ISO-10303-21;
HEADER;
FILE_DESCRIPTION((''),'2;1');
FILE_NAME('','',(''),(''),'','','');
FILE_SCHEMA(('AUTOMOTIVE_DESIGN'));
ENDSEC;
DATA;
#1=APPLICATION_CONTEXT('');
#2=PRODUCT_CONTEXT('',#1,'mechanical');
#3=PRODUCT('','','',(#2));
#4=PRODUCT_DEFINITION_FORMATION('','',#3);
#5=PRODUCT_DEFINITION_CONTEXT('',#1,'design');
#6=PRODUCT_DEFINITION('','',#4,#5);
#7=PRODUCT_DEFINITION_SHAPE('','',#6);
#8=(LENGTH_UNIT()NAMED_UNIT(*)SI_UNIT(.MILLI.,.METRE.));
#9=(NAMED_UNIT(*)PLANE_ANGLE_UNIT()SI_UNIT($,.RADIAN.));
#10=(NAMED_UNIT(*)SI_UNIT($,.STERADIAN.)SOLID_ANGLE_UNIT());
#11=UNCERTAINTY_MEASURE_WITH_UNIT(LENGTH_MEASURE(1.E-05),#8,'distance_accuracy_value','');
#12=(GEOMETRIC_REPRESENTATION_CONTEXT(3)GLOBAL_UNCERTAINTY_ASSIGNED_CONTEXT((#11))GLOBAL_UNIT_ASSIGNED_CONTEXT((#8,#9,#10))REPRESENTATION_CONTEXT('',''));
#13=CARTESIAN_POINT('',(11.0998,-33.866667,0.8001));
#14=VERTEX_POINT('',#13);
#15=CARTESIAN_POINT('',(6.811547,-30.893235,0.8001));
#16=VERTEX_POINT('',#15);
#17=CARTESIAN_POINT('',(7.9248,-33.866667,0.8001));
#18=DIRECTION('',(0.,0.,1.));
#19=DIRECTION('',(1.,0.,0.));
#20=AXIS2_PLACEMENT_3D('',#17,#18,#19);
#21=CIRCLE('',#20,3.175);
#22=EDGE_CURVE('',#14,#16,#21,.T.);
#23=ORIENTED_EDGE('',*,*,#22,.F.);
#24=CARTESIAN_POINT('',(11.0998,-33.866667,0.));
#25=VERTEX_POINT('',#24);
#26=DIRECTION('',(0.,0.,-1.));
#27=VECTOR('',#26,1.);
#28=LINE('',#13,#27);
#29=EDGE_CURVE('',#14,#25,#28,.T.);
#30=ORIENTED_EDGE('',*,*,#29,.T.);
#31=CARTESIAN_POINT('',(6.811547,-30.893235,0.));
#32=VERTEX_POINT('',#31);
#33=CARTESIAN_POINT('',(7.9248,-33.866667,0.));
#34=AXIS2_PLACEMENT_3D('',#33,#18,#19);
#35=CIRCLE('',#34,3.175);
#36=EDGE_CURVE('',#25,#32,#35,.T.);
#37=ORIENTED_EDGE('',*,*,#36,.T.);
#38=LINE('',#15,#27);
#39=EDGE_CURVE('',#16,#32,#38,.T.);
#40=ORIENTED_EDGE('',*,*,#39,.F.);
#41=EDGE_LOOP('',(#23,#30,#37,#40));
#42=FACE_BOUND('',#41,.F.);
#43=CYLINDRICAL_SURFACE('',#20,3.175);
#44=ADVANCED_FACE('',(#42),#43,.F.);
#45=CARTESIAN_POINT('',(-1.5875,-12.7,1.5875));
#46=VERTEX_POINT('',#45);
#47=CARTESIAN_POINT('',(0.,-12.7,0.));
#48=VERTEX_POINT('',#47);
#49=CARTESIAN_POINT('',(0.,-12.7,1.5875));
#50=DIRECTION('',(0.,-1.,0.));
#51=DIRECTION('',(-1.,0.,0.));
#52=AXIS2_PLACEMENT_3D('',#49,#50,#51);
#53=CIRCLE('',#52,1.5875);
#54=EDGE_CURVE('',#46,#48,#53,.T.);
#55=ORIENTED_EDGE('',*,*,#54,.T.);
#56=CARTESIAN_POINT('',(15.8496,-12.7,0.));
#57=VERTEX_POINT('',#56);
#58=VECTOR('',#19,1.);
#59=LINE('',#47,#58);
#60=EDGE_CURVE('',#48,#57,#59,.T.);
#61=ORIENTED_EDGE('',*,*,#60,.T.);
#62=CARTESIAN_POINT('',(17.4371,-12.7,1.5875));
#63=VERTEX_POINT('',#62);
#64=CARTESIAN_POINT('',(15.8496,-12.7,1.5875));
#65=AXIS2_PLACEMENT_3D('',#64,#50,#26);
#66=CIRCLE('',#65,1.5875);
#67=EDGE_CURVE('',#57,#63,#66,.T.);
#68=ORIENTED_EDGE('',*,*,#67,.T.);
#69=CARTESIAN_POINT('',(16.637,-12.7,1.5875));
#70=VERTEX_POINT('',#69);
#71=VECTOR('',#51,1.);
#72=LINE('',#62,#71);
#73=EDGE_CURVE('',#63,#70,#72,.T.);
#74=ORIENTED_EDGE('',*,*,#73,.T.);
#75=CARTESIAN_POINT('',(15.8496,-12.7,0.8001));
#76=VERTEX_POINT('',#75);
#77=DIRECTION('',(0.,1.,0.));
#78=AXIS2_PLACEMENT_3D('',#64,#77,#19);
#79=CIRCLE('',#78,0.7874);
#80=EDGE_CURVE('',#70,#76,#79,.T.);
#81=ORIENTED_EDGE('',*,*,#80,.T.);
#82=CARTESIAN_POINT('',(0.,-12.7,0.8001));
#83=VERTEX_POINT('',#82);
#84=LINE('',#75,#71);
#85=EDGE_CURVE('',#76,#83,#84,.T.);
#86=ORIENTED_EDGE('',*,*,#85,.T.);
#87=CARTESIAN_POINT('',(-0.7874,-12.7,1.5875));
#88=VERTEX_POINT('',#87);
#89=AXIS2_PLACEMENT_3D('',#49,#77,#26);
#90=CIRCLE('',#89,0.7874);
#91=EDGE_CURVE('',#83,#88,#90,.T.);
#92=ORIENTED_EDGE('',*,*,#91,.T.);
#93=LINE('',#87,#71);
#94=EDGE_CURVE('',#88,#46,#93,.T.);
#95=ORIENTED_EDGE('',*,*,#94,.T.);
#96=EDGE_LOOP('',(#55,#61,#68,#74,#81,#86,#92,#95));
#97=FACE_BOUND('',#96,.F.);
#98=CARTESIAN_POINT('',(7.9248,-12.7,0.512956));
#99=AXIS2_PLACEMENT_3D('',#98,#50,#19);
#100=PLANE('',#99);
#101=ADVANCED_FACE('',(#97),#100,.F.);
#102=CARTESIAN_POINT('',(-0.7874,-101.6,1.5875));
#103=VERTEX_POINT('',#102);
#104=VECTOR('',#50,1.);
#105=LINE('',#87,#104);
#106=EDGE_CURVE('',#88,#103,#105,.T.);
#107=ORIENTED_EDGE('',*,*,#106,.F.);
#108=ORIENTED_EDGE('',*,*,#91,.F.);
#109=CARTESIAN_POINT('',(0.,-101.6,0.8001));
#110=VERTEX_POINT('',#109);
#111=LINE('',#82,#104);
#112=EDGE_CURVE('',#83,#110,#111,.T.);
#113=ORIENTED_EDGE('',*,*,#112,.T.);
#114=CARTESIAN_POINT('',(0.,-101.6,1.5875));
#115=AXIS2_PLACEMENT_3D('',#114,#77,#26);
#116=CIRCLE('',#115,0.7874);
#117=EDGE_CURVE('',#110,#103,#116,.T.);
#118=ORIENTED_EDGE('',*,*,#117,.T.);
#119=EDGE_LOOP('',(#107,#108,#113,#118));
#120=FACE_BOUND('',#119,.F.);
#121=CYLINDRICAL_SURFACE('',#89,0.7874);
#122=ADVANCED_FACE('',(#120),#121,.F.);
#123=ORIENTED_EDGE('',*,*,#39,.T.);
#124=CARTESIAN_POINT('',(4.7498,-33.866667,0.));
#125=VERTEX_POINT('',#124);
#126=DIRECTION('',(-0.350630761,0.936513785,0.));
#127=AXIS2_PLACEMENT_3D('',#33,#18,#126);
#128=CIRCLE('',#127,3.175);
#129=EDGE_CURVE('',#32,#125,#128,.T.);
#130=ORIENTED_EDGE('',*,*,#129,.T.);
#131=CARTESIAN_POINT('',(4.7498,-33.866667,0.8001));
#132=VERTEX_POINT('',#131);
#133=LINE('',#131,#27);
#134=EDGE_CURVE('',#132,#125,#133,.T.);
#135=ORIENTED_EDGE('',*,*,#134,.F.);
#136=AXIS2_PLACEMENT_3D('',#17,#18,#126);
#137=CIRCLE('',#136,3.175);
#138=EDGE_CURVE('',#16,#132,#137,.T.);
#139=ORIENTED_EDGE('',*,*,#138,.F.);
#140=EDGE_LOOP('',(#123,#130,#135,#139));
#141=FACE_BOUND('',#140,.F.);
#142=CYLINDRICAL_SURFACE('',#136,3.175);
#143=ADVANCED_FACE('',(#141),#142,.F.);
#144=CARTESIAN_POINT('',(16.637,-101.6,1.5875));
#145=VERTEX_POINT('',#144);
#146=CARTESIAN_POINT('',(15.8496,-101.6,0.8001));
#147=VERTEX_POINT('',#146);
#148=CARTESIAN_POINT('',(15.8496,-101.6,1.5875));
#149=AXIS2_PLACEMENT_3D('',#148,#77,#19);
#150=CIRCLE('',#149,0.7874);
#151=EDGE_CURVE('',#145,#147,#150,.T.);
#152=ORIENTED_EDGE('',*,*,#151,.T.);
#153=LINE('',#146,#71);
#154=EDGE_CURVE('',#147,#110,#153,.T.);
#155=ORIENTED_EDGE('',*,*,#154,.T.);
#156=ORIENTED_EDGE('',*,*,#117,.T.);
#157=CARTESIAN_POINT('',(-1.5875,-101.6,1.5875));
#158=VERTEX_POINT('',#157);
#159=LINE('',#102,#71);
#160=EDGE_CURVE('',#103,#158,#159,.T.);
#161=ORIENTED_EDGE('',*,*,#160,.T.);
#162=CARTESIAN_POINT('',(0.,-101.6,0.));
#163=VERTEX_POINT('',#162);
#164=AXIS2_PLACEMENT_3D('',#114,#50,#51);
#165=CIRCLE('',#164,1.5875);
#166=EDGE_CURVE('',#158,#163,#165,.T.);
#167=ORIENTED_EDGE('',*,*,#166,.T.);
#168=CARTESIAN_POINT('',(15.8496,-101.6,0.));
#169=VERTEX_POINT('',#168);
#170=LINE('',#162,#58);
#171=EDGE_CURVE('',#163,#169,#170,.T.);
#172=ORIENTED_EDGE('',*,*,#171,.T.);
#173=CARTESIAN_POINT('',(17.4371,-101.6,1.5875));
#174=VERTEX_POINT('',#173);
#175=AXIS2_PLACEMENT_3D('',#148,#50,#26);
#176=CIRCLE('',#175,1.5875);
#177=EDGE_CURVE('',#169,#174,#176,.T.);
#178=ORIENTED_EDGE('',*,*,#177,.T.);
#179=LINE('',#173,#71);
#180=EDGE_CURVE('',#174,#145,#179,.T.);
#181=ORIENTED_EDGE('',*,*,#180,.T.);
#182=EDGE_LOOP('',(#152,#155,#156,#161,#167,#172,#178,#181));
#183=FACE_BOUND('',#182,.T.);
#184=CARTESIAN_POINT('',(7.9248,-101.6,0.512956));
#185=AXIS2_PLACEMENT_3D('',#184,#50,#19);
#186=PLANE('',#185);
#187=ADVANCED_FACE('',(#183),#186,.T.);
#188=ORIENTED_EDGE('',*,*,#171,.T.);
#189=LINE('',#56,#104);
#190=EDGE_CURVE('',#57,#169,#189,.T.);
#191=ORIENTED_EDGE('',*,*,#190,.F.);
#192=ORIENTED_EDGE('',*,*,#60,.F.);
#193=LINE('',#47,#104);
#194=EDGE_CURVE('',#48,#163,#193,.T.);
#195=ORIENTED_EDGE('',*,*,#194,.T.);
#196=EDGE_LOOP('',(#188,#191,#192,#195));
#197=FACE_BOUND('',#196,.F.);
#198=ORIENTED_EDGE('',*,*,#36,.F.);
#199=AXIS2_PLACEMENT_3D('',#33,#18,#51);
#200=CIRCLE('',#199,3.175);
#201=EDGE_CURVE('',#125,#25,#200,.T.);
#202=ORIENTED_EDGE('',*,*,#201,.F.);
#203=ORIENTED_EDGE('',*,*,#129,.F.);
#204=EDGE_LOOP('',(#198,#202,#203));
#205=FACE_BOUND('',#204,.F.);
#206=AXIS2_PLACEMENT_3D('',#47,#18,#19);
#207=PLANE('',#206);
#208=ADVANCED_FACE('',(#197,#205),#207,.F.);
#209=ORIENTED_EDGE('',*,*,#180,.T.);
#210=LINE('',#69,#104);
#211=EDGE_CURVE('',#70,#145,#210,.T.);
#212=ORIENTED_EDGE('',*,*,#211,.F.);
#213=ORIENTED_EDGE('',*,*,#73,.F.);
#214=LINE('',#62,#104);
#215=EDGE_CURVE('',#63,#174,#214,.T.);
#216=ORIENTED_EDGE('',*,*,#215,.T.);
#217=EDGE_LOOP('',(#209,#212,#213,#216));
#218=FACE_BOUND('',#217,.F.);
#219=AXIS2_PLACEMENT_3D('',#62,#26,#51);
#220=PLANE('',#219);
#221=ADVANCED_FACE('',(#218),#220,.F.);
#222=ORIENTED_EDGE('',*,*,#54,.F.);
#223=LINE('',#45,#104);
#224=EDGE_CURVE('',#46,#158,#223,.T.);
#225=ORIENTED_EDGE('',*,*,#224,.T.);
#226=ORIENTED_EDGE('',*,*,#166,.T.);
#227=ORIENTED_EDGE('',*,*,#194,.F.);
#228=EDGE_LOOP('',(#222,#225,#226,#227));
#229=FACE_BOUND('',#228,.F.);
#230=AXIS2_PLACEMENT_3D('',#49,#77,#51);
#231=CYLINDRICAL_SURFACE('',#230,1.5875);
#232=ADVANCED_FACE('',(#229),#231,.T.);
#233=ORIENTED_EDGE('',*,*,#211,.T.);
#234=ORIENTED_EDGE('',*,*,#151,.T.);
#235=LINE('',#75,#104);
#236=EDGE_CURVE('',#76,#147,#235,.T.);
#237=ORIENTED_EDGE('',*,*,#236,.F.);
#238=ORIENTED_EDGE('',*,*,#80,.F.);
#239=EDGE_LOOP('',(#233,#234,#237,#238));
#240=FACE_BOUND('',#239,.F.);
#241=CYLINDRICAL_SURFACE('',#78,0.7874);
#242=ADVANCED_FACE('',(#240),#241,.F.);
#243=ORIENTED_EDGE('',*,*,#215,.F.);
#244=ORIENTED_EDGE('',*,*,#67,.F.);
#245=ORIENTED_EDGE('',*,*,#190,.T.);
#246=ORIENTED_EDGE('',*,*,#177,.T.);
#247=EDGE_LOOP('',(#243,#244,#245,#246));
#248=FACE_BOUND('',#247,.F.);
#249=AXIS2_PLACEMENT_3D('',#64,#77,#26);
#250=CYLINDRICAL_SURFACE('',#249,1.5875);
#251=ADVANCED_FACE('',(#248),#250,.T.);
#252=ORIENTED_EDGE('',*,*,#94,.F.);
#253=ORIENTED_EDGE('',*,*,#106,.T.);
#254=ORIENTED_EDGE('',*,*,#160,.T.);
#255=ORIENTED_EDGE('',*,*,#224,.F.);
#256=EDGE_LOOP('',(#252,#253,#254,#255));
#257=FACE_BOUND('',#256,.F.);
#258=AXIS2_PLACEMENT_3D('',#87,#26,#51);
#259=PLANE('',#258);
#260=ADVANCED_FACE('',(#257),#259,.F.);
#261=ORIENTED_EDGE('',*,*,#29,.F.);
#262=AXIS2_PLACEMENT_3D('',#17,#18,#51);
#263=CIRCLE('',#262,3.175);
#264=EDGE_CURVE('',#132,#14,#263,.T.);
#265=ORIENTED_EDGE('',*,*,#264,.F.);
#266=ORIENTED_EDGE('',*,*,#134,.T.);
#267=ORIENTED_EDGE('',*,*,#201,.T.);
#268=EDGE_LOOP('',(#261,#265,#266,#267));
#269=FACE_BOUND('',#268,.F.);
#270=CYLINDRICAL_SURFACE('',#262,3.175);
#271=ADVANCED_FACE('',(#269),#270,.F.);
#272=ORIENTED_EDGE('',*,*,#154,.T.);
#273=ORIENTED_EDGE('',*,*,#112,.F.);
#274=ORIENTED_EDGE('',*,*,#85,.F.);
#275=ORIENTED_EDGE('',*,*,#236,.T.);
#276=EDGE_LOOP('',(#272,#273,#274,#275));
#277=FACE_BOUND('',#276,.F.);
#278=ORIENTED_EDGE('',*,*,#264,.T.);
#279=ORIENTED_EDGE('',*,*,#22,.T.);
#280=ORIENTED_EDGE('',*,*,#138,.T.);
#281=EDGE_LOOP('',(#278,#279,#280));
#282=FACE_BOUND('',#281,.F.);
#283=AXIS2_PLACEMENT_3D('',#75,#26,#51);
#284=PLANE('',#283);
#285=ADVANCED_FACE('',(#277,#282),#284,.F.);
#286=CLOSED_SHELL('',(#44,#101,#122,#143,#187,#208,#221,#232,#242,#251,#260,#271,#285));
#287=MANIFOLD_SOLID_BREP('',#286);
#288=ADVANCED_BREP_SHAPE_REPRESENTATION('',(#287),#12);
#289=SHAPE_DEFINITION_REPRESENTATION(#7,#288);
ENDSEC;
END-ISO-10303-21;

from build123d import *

# Parameters (mm, degrees)
F1_START = 12.7
F1_DEPTH = 88.9
F3_DEPTH = 0.8001


# Not quite as in the source:
# - a feature names something its author has since deleted; it is built from what else it names


with BuildPart() as f1:
    # F0 (on Front) → F1 (new body)
    with BuildSketch(Plane.XZ.offset(F1_START)):
        with BuildLine():
            ThreePointArc((-1.5875, 1.5875), (-1.1225320151, 0.4649679849), (0, 0))
            Line((0, 0), (15.8496, 0))
            ThreePointArc((15.8496, 0), (16.9721320151, 0.4649679849), (17.4371, 1.5875))
            Line((17.4371, 1.5875), (16.637, 1.5875))
            ThreePointArc((16.637, 1.5875), (16.4063758795, 1.0307241205), (15.8496, 0.8001))
            Line((15.8496, 0.8001), (7.9248, 0.8001))
            Line((7.9248, 0.8001), (0, 0.8001))
            ThreePointArc((0, 0.8001), (-0.5567758795, 1.0307241205), (-0.7874, 1.5875))
            Line((-0.7874, 1.5875), (-1.5875, 1.5875))
        make_face()
    extrude(amount=F1_DEPTH)

    # F2 (on face) → F3 (cut, through all)
    with BuildSketch(Plane.XY.offset(0.8001)):
        with BuildLine():
            Line((4.7498, -33.8666666667), (7.9248, -33.8666666667))
            Line((7.9248, -33.8666666667), (6.8115473336, -30.8932353995))
            ThreePointArc((6.8115473336, -30.8932353995), (5.3156619991, -32.0575166198), (4.7498, -33.8666666667))
        make_face()
        with BuildLine():
            Line((7.9248, -33.8666666667), (11.0998, -33.8666666667))
            ThreePointArc((11.0998, -33.8666666667), (9.7339500469, -31.2575286657), (6.8115473336, -30.8932353995))
            Line((6.8115473336, -30.8932353995), (7.9248, -33.8666666667))
        make_face()
        with BuildLine():
            ThreePointArc((4.7498, -33.8666666667), (7.9248, -37.0416666667), (11.0998, -33.8666666667))
            Line((11.0998, -33.8666666667), (7.9248, -33.8666666667))
            Line((7.9248, -33.8666666667), (4.7498, -33.8666666667))
        make_face()
    extrude(amount=-F3_DEPTH, mode=Mode.SUBTRACT)


solid = f1.part
